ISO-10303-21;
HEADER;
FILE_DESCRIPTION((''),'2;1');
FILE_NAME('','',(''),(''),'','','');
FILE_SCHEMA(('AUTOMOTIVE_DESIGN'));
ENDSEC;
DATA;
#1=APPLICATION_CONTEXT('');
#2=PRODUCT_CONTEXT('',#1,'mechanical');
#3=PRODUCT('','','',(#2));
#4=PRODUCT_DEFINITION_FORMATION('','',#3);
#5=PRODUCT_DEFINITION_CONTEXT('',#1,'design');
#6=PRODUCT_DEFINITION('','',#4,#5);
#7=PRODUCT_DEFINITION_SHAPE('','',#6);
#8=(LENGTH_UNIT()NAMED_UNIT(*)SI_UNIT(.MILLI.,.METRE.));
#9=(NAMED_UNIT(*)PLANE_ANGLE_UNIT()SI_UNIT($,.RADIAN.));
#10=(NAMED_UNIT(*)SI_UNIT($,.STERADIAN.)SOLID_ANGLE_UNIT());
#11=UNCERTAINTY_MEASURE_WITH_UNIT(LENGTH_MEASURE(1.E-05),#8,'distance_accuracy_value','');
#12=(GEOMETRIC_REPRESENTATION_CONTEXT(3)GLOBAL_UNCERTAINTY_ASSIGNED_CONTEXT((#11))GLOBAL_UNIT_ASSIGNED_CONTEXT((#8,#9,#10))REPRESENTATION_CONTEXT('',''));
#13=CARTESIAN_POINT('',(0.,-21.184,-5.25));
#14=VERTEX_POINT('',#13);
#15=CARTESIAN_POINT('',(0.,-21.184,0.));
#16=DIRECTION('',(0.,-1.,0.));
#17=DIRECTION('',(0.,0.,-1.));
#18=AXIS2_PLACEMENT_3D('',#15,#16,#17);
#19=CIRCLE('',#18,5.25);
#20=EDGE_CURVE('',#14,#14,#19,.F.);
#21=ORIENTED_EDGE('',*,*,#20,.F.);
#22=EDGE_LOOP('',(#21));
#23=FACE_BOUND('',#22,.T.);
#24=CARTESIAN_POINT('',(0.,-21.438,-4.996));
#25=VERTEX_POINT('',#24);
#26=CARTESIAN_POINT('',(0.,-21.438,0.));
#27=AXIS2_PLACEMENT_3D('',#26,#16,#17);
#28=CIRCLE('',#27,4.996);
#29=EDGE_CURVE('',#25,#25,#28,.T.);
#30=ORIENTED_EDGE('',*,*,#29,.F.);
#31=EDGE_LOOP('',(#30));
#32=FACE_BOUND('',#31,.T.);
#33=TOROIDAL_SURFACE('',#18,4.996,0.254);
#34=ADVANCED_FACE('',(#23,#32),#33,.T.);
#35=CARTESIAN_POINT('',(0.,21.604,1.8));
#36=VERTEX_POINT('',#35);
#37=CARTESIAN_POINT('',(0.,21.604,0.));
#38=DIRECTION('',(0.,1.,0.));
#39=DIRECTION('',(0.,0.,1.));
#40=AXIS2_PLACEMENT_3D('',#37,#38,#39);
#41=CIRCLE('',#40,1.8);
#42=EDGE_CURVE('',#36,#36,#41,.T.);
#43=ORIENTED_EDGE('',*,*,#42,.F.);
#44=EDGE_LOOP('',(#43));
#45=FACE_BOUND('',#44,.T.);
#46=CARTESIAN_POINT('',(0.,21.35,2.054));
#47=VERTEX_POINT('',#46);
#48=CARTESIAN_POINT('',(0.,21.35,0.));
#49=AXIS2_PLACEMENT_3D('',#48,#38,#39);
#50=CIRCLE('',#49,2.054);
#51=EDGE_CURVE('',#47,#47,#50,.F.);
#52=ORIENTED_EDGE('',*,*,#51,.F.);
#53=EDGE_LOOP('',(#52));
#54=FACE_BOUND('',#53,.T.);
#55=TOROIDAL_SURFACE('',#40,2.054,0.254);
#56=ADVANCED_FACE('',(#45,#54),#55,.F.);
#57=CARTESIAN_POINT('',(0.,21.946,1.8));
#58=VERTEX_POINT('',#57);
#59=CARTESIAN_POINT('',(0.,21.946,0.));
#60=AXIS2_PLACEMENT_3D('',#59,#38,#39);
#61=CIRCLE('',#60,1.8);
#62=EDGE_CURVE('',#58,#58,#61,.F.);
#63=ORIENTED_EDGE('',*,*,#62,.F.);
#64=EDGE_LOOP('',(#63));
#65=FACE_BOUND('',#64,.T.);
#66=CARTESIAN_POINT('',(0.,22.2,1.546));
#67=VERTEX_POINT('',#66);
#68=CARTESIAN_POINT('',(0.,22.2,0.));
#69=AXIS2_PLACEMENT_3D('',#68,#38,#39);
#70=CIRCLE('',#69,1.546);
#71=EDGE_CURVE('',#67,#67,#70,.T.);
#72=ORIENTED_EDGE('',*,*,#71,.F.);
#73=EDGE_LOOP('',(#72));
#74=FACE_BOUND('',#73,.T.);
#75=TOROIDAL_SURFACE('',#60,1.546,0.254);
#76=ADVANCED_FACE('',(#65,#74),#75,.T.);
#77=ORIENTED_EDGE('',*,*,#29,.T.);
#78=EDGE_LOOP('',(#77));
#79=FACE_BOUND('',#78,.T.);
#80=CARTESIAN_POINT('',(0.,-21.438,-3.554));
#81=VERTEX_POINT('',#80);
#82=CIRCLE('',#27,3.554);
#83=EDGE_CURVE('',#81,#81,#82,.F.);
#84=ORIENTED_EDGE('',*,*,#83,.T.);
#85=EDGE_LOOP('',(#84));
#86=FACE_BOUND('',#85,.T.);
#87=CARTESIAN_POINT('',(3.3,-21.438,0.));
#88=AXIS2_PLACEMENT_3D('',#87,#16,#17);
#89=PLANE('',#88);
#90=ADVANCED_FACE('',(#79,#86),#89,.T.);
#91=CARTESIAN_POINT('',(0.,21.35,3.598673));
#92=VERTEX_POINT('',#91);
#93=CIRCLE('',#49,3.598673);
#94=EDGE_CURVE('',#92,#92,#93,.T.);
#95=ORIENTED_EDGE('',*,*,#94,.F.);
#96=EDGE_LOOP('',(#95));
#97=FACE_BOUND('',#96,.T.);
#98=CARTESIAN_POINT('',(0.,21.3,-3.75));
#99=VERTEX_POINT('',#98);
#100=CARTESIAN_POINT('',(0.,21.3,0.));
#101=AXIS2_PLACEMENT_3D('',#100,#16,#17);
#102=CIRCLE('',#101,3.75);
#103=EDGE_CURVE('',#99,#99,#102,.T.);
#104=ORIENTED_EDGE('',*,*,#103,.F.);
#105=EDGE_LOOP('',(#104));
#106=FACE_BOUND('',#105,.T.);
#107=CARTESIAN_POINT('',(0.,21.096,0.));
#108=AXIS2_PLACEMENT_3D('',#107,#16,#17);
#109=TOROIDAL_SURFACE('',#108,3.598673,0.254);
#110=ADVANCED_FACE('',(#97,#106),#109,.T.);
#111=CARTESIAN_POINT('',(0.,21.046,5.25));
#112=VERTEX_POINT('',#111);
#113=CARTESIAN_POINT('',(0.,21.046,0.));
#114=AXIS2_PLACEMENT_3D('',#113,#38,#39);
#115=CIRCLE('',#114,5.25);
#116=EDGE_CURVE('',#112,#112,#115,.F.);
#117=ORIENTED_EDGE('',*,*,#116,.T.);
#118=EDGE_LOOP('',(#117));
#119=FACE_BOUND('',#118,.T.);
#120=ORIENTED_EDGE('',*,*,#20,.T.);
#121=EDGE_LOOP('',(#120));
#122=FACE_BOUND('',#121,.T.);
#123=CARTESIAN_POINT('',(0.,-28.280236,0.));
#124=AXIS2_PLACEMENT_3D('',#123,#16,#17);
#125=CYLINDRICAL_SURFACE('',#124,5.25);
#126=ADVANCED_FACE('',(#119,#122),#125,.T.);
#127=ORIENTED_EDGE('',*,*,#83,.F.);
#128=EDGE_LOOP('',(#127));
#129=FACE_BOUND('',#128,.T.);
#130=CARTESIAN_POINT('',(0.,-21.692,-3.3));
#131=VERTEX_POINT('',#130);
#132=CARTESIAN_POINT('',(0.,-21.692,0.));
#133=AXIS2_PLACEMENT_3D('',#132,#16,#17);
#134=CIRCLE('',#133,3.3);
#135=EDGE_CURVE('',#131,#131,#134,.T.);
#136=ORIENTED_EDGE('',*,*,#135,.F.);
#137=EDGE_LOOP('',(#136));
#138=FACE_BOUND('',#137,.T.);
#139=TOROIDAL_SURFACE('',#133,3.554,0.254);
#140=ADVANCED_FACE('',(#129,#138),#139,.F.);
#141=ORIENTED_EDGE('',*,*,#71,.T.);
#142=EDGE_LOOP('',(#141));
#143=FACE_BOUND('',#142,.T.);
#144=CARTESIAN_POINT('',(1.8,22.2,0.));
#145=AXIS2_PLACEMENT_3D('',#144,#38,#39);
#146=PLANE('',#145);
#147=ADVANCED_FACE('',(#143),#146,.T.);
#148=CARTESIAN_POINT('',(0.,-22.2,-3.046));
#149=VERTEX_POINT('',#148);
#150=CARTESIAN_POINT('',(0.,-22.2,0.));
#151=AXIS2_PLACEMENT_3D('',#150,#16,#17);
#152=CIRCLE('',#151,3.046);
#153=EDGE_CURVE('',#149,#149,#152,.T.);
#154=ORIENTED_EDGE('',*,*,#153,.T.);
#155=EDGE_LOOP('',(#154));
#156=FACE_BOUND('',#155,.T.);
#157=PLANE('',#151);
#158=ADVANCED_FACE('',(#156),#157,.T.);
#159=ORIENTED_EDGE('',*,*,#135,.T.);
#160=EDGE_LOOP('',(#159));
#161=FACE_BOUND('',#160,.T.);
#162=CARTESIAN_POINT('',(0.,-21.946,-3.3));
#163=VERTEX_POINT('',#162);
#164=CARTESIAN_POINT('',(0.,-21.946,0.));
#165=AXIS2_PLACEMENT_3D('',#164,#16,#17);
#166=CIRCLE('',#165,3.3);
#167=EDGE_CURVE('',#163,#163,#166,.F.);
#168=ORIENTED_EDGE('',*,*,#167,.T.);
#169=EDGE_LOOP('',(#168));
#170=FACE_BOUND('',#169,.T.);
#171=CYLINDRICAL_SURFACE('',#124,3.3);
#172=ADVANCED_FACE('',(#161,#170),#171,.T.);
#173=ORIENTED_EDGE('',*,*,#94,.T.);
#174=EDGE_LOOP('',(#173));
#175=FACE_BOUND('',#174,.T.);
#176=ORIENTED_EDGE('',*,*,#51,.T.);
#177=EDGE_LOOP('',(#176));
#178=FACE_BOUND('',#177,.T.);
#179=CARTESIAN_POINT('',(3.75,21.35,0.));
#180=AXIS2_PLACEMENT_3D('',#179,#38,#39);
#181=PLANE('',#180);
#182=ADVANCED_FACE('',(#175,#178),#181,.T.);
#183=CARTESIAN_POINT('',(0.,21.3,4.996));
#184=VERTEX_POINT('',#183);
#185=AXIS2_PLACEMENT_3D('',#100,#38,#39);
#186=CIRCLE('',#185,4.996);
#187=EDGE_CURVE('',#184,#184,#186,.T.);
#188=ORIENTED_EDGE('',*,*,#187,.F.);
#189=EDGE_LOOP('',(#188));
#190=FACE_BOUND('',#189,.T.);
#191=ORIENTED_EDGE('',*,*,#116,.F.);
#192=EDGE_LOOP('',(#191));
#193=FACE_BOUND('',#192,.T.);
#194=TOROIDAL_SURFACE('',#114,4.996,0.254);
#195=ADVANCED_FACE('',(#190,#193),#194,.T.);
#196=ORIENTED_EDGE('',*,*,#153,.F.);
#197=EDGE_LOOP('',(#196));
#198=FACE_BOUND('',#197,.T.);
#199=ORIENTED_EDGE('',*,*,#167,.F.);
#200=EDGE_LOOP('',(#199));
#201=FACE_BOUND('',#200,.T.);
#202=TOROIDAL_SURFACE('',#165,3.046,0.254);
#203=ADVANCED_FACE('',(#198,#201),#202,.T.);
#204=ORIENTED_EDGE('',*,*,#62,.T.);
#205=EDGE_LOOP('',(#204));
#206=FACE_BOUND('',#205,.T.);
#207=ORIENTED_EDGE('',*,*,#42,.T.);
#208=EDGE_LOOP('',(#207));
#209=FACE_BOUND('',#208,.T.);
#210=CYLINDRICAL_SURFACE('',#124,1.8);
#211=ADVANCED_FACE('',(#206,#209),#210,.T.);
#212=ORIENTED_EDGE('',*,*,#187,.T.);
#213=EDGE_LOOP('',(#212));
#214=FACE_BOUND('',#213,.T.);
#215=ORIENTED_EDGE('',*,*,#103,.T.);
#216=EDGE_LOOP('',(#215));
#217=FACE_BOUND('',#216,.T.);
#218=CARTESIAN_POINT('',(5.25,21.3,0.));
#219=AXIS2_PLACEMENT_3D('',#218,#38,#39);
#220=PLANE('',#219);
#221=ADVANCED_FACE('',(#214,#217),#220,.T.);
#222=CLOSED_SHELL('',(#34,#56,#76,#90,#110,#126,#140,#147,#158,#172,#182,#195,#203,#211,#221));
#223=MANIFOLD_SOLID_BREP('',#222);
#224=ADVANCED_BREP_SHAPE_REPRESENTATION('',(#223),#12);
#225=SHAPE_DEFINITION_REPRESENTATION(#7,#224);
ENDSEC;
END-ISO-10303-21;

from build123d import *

# Parameters (mm, degrees)
FILLET1_R = 0.254
FILLET2_R = 0.254


with BuildPart() as part:
    # Sketch2 → Revolve1 (revolve)
    with BuildSketch(Plane.XY, mode=Mode.PRIVATE) as revolve1_sk:
        Polygon((0, -22.2), (3.3, -22.2), (3.3, -21.438), (5.25, -21.438), (5.25, 21.3), (3.75, 21.3), (3.75, 21.35), (1.8, 21.35), (1.8, 22.2), (0, 22.2), align=None)
    revolve(revolve1_sk.sketch.rotate(Axis((0, -28.28023606, 0), (0, 1, 0)), 90), axis=Axis((0, -28.28023606, 0), (0, 1, 0)))

    # Fillet1
    fillet1_edges = [part.edges().sort_by_distance(p)[0] for p in [
        (0, 21.3, 5.25),
        (0, -21.438, 5.25),
    ]]
    fillet(fillet1_edges, radius=FILLET1_R)

    # Fillet2
    # the kernel refuses this fillet: 0.254 mm, written as the material it adds along each edge
    with BuildSketch(Plane(origin=(0, 21.35, 0), x_dir=(0, 0, -1), z_dir=(1, 0, 0))) as fillet2_piece_1:
        with BuildLine():
            CenterArc((1.8 + FILLET2_R, FILLET2_R), FILLET2_R, 180, 90)
            Line((1.8, FILLET2_R), (1.8, 0))
            Line((1.8, 0), (1.8 + FILLET2_R, 0))
        make_face()
    revolve(axis=Axis((0, 21.35, 0), (0, 1, 0)))
    with BuildSketch(Plane(origin=(0, -21.438, 0), x_dir=(0, 0, -1), z_dir=(1, 0, 0))) as fillet2_piece_2:
        with BuildLine():
            CenterArc((3.3 + FILLET2_R, -FILLET2_R), FILLET2_R, 90, 90)
            Line((3.3, -FILLET2_R), (3.3, 0))
            Line((3.3, 0), (3.3 + FILLET2_R, 0))
        make_face()
    revolve(axis=Axis((0, -21.438, 0), (0, 1, 0)))
    # the kernel refuses this fillet: 0.254 mm, written as the material it takes off along each edge
    with BuildSketch(Plane(origin=(0, -22.2, 0), x_dir=(0, 0, -1), z_dir=(1, 0, 0))) as fillet2_2_piece_1:
        with BuildLine():
            CenterArc((3.3 - FILLET2_R, FILLET2_R), FILLET2_R, 270, 90)
            Line((3.3 - FILLET2_R, 0), (3.3, 0))
            Line((3.3, 0), (3.3, FILLET2_R))
        make_face()
    revolve(axis=Axis((0, -22.2, 0), (0, 1, 0)), mode=Mode.SUBTRACT)
    with BuildSketch(Plane(origin=(0, 22.2, 0), x_dir=(0, 0, -1), z_dir=(1, 0, 0))) as fillet2_2_piece_2:
        with BuildLine():
            CenterArc((1.8 - FILLET2_R, -FILLET2_R), FILLET2_R, 0, 90)
            Line((1.8 - FILLET2_R, 0), (1.8, 0))
            Line((1.8, 0), (1.8, -FILLET2_R))
        make_face()
    revolve(axis=Axis((0, 22.2, 0), (0, 1, 0)), mode=Mode.SUBTRACT)
    with BuildSketch(Plane(origin=(0, 21.35, 0), x_dir=(0, 0, -1), z_dir=(1, 0, 0))) as fillet2_2_piece_3:
        with BuildLine():
            CenterArc((3.59867254, -0.254), FILLET2_R, 53.431928983, 36.568071017)
            Line((3.59867254, 0), (3.75, 0))
            Line((3.75, 0), (3.75, -0.05))
        make_face()
    revolve(axis=Axis((0, 21.35, 0), (0, 1, 0)), mode=Mode.SUBTRACT)


solid = part.part
